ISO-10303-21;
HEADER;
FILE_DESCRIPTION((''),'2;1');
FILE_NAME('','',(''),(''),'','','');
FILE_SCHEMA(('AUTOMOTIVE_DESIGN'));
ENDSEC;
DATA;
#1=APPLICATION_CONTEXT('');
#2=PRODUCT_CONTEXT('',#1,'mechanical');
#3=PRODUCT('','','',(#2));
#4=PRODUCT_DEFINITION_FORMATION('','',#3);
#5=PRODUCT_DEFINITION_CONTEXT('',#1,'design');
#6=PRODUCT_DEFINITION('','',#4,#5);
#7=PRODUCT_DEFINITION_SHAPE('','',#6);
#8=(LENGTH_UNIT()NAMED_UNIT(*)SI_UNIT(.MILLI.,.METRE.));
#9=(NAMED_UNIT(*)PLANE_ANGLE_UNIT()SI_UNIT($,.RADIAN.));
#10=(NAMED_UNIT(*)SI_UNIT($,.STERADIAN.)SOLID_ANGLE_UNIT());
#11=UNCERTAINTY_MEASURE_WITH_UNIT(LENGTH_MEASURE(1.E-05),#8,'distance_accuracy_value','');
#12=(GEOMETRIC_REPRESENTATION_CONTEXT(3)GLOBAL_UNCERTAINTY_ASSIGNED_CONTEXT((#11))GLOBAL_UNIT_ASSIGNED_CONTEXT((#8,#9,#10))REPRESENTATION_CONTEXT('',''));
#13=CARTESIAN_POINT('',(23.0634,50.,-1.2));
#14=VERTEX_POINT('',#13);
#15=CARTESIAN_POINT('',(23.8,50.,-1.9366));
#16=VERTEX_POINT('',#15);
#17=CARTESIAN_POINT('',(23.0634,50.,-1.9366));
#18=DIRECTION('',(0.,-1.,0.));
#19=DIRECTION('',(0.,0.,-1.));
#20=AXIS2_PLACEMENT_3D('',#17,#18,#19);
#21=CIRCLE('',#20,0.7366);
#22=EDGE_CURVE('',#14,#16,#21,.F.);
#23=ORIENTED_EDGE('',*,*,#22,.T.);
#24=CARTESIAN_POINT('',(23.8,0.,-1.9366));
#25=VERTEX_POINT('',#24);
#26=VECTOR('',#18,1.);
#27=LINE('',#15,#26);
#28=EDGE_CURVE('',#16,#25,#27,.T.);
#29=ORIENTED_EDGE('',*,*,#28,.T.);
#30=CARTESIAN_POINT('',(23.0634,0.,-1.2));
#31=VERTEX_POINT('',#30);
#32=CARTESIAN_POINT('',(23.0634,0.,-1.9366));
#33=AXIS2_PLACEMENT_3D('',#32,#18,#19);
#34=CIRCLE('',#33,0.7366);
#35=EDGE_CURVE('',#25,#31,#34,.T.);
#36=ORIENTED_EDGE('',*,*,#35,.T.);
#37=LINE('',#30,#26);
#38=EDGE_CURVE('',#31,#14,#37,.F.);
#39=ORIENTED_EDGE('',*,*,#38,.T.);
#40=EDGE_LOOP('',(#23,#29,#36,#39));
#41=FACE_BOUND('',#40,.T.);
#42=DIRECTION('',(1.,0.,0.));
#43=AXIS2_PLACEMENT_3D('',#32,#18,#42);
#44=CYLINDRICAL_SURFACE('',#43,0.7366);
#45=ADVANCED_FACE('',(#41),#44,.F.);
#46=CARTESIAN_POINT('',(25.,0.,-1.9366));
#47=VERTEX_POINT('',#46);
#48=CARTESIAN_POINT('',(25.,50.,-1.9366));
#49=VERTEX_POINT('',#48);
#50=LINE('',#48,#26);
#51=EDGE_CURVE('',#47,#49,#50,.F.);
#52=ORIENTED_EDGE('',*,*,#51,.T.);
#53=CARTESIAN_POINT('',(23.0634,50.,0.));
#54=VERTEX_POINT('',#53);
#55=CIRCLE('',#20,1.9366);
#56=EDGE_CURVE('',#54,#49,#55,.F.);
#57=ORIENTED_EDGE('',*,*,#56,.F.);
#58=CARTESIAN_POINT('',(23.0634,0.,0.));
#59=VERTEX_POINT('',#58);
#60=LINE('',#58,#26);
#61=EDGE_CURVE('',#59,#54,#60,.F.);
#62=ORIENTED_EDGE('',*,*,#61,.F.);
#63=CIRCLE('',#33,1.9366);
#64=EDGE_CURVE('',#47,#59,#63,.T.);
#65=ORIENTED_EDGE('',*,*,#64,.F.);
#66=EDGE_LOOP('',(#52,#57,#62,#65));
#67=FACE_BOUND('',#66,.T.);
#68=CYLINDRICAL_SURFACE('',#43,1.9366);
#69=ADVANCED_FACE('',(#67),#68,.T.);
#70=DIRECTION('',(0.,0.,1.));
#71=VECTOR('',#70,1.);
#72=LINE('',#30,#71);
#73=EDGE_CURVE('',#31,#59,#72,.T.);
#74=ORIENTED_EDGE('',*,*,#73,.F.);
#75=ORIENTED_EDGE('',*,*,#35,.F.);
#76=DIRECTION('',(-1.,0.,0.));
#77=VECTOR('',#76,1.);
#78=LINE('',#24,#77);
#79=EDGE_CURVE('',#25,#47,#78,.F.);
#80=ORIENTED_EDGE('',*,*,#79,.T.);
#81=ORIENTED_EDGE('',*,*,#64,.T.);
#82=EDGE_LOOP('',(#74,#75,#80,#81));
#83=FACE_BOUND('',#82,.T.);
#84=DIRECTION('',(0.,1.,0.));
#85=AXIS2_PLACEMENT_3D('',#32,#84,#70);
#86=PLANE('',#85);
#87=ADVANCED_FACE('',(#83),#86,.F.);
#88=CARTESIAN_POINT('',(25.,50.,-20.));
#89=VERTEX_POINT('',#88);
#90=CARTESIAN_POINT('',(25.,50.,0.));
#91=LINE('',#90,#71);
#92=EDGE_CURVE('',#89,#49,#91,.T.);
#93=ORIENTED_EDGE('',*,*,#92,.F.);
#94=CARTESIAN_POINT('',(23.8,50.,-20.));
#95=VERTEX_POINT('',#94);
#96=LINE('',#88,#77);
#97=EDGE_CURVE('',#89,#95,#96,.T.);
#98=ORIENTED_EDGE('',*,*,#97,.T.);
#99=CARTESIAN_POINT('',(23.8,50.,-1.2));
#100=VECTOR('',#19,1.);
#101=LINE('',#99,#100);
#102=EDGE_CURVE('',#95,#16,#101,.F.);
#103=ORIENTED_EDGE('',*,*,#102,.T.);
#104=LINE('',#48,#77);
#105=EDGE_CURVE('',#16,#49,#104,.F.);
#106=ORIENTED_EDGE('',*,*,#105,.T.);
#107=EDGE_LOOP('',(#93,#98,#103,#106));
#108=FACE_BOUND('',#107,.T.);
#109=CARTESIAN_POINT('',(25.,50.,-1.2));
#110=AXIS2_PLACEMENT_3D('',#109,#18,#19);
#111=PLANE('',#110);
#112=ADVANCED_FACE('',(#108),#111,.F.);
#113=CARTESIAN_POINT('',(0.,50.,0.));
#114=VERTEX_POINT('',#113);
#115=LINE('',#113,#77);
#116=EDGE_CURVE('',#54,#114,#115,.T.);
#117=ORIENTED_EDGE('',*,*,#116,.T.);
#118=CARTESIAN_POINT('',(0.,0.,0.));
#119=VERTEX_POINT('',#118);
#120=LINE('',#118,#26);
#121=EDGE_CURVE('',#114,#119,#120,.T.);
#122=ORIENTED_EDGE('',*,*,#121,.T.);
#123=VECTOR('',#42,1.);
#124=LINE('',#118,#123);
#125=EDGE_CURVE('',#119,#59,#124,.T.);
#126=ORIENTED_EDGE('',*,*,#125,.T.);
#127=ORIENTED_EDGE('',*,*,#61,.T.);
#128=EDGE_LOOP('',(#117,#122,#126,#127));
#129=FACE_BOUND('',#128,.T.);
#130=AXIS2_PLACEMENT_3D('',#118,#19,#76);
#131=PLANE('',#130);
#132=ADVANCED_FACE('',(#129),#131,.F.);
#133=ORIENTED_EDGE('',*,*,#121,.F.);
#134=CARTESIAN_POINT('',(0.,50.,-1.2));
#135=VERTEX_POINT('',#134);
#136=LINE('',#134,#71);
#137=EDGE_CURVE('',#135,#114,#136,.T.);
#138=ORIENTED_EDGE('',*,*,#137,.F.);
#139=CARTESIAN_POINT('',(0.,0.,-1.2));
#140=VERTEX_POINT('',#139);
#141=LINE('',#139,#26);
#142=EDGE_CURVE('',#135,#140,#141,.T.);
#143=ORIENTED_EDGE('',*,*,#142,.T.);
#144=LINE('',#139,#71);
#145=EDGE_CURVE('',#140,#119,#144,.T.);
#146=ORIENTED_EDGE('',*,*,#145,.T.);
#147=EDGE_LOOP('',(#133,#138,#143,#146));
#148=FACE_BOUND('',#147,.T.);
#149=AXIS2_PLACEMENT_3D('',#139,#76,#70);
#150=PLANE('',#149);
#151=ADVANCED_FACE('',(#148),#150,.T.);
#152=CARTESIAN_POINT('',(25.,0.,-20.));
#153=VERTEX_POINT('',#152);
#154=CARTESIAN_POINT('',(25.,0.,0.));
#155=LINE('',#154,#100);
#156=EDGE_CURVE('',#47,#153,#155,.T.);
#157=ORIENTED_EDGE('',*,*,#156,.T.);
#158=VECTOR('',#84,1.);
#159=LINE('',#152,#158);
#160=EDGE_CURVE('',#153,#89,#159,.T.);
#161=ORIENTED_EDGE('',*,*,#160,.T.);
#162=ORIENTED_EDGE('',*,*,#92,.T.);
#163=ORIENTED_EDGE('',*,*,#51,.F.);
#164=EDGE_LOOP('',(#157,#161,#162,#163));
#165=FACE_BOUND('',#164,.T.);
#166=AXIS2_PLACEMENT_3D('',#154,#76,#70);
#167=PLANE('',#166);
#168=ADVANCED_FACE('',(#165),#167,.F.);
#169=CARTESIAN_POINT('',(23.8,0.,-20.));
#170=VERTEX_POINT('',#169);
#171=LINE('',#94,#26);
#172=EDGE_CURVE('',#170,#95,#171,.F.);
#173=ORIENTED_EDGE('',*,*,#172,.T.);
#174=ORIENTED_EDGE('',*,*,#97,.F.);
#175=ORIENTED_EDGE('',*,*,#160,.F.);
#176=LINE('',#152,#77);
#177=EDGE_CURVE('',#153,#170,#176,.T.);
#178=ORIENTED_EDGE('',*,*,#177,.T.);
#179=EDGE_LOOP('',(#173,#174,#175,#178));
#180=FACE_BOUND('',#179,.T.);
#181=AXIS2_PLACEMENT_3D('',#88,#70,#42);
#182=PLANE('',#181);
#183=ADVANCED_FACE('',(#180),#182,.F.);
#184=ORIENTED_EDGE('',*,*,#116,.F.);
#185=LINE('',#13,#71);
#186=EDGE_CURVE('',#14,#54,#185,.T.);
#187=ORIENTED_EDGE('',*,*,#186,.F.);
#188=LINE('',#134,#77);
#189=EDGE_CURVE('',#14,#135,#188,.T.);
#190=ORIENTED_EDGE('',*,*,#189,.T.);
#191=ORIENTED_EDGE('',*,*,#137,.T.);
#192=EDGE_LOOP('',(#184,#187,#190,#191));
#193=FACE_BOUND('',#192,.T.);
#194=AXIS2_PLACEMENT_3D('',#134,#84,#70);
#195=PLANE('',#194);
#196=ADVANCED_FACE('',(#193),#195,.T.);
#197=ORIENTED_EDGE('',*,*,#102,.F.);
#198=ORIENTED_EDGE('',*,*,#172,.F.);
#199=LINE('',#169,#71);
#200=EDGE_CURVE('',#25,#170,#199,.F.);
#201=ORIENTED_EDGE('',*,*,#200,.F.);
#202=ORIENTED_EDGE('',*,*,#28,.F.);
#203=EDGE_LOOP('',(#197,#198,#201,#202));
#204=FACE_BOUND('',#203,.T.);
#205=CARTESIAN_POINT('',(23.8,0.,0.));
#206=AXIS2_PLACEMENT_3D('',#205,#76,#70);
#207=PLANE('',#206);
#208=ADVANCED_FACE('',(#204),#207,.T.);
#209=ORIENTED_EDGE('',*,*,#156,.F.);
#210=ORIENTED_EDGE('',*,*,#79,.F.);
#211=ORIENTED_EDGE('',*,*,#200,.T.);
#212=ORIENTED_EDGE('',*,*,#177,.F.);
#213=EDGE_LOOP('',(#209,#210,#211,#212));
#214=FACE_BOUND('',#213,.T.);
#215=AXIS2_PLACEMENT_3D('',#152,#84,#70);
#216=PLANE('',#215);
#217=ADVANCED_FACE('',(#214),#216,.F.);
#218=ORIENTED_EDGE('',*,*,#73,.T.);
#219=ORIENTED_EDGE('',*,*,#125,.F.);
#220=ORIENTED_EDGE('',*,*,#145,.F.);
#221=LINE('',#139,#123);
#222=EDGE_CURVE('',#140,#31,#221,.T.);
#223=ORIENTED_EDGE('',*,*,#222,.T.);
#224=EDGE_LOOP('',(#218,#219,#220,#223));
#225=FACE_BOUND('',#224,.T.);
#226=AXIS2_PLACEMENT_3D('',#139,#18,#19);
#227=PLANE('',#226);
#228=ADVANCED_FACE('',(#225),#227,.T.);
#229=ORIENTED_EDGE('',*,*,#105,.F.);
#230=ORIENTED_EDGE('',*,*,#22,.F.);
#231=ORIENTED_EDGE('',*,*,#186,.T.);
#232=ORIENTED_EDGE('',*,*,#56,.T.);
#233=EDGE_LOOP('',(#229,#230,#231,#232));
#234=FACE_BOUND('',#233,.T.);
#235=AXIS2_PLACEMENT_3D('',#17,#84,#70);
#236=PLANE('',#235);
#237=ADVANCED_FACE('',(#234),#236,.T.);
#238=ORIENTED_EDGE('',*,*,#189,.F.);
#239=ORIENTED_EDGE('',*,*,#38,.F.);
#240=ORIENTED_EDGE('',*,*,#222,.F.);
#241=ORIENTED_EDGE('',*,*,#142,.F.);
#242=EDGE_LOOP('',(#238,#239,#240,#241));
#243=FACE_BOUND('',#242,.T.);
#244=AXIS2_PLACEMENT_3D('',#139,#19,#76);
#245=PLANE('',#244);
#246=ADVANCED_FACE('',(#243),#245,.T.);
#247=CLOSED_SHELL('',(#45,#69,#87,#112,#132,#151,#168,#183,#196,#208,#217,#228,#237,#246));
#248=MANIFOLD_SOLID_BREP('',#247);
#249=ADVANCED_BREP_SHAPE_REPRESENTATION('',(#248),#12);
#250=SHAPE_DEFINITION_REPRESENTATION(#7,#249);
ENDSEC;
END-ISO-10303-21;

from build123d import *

# Parameters (mm, degrees)
SKETCH4_W                    = 25
SKETCH4_H                    = 50
BASE_FLANGE1_DEPTH           = 1.2
EDGE_FLANGE1_STRIP_W         = 6.2732
EDGE_FLANGE1_STRIP_H         = 1.2
EDGE_FLANGE1_STRIP_CUT_DEPTH = 50
EDGE_FLANGE1_DEPTH           = 50


# Sheet-metal steps are written as plain solids
with BuildPart() as part:
    # Sketch4 → Base-Flange1 (new body)
    with BuildSketch(Plane.XY):
        with Locations((12.5, 25)):
            Rectangle(SKETCH4_W, SKETCH4_H)
    extrude(amount=-BASE_FLANGE1_DEPTH)

    # Edge-Flange1 strip (across the edge) → Edge-Flange1 strip cut (cut)
    with BuildSketch(Plane(origin=(25, 50, -1.2), x_dir=(-1, 0, 0), z_dir=(0, -1, 0))):
        with Locations((-1.2, -0.6)):
            Rectangle(EDGE_FLANGE1_STRIP_W, EDGE_FLANGE1_STRIP_H)
    extrude(amount=EDGE_FLANGE1_STRIP_CUT_DEPTH, mode=Mode.SUBTRACT)

    # Edge-Flange1 section (across the edge) → Edge-Flange1 (add)
    with BuildSketch(Plane(origin=(25, 50, -1.2), x_dir=(-1, 0, 0), z_dir=(0, -1, 0))):
        with BuildLine():
            Line((0, 0.7366), (0, 18.8))
            Line((0, 18.8), (1.2, 18.8))
            Line((1.2, 18.8), (1.2, 0.7366))
            ThreePointArc((1.2, 0.7366), (1.415745145, 0.215745145), (1.9366, 0))
            Line((1.9366, 0), (1.9366, -1.2))
            ThreePointArc((1.9366, -1.2), (0.567217008, -0.632782992), (0, 0.7366))
        make_face()
    extrude(amount=EDGE_FLANGE1_DEPTH)


solid = part.part
